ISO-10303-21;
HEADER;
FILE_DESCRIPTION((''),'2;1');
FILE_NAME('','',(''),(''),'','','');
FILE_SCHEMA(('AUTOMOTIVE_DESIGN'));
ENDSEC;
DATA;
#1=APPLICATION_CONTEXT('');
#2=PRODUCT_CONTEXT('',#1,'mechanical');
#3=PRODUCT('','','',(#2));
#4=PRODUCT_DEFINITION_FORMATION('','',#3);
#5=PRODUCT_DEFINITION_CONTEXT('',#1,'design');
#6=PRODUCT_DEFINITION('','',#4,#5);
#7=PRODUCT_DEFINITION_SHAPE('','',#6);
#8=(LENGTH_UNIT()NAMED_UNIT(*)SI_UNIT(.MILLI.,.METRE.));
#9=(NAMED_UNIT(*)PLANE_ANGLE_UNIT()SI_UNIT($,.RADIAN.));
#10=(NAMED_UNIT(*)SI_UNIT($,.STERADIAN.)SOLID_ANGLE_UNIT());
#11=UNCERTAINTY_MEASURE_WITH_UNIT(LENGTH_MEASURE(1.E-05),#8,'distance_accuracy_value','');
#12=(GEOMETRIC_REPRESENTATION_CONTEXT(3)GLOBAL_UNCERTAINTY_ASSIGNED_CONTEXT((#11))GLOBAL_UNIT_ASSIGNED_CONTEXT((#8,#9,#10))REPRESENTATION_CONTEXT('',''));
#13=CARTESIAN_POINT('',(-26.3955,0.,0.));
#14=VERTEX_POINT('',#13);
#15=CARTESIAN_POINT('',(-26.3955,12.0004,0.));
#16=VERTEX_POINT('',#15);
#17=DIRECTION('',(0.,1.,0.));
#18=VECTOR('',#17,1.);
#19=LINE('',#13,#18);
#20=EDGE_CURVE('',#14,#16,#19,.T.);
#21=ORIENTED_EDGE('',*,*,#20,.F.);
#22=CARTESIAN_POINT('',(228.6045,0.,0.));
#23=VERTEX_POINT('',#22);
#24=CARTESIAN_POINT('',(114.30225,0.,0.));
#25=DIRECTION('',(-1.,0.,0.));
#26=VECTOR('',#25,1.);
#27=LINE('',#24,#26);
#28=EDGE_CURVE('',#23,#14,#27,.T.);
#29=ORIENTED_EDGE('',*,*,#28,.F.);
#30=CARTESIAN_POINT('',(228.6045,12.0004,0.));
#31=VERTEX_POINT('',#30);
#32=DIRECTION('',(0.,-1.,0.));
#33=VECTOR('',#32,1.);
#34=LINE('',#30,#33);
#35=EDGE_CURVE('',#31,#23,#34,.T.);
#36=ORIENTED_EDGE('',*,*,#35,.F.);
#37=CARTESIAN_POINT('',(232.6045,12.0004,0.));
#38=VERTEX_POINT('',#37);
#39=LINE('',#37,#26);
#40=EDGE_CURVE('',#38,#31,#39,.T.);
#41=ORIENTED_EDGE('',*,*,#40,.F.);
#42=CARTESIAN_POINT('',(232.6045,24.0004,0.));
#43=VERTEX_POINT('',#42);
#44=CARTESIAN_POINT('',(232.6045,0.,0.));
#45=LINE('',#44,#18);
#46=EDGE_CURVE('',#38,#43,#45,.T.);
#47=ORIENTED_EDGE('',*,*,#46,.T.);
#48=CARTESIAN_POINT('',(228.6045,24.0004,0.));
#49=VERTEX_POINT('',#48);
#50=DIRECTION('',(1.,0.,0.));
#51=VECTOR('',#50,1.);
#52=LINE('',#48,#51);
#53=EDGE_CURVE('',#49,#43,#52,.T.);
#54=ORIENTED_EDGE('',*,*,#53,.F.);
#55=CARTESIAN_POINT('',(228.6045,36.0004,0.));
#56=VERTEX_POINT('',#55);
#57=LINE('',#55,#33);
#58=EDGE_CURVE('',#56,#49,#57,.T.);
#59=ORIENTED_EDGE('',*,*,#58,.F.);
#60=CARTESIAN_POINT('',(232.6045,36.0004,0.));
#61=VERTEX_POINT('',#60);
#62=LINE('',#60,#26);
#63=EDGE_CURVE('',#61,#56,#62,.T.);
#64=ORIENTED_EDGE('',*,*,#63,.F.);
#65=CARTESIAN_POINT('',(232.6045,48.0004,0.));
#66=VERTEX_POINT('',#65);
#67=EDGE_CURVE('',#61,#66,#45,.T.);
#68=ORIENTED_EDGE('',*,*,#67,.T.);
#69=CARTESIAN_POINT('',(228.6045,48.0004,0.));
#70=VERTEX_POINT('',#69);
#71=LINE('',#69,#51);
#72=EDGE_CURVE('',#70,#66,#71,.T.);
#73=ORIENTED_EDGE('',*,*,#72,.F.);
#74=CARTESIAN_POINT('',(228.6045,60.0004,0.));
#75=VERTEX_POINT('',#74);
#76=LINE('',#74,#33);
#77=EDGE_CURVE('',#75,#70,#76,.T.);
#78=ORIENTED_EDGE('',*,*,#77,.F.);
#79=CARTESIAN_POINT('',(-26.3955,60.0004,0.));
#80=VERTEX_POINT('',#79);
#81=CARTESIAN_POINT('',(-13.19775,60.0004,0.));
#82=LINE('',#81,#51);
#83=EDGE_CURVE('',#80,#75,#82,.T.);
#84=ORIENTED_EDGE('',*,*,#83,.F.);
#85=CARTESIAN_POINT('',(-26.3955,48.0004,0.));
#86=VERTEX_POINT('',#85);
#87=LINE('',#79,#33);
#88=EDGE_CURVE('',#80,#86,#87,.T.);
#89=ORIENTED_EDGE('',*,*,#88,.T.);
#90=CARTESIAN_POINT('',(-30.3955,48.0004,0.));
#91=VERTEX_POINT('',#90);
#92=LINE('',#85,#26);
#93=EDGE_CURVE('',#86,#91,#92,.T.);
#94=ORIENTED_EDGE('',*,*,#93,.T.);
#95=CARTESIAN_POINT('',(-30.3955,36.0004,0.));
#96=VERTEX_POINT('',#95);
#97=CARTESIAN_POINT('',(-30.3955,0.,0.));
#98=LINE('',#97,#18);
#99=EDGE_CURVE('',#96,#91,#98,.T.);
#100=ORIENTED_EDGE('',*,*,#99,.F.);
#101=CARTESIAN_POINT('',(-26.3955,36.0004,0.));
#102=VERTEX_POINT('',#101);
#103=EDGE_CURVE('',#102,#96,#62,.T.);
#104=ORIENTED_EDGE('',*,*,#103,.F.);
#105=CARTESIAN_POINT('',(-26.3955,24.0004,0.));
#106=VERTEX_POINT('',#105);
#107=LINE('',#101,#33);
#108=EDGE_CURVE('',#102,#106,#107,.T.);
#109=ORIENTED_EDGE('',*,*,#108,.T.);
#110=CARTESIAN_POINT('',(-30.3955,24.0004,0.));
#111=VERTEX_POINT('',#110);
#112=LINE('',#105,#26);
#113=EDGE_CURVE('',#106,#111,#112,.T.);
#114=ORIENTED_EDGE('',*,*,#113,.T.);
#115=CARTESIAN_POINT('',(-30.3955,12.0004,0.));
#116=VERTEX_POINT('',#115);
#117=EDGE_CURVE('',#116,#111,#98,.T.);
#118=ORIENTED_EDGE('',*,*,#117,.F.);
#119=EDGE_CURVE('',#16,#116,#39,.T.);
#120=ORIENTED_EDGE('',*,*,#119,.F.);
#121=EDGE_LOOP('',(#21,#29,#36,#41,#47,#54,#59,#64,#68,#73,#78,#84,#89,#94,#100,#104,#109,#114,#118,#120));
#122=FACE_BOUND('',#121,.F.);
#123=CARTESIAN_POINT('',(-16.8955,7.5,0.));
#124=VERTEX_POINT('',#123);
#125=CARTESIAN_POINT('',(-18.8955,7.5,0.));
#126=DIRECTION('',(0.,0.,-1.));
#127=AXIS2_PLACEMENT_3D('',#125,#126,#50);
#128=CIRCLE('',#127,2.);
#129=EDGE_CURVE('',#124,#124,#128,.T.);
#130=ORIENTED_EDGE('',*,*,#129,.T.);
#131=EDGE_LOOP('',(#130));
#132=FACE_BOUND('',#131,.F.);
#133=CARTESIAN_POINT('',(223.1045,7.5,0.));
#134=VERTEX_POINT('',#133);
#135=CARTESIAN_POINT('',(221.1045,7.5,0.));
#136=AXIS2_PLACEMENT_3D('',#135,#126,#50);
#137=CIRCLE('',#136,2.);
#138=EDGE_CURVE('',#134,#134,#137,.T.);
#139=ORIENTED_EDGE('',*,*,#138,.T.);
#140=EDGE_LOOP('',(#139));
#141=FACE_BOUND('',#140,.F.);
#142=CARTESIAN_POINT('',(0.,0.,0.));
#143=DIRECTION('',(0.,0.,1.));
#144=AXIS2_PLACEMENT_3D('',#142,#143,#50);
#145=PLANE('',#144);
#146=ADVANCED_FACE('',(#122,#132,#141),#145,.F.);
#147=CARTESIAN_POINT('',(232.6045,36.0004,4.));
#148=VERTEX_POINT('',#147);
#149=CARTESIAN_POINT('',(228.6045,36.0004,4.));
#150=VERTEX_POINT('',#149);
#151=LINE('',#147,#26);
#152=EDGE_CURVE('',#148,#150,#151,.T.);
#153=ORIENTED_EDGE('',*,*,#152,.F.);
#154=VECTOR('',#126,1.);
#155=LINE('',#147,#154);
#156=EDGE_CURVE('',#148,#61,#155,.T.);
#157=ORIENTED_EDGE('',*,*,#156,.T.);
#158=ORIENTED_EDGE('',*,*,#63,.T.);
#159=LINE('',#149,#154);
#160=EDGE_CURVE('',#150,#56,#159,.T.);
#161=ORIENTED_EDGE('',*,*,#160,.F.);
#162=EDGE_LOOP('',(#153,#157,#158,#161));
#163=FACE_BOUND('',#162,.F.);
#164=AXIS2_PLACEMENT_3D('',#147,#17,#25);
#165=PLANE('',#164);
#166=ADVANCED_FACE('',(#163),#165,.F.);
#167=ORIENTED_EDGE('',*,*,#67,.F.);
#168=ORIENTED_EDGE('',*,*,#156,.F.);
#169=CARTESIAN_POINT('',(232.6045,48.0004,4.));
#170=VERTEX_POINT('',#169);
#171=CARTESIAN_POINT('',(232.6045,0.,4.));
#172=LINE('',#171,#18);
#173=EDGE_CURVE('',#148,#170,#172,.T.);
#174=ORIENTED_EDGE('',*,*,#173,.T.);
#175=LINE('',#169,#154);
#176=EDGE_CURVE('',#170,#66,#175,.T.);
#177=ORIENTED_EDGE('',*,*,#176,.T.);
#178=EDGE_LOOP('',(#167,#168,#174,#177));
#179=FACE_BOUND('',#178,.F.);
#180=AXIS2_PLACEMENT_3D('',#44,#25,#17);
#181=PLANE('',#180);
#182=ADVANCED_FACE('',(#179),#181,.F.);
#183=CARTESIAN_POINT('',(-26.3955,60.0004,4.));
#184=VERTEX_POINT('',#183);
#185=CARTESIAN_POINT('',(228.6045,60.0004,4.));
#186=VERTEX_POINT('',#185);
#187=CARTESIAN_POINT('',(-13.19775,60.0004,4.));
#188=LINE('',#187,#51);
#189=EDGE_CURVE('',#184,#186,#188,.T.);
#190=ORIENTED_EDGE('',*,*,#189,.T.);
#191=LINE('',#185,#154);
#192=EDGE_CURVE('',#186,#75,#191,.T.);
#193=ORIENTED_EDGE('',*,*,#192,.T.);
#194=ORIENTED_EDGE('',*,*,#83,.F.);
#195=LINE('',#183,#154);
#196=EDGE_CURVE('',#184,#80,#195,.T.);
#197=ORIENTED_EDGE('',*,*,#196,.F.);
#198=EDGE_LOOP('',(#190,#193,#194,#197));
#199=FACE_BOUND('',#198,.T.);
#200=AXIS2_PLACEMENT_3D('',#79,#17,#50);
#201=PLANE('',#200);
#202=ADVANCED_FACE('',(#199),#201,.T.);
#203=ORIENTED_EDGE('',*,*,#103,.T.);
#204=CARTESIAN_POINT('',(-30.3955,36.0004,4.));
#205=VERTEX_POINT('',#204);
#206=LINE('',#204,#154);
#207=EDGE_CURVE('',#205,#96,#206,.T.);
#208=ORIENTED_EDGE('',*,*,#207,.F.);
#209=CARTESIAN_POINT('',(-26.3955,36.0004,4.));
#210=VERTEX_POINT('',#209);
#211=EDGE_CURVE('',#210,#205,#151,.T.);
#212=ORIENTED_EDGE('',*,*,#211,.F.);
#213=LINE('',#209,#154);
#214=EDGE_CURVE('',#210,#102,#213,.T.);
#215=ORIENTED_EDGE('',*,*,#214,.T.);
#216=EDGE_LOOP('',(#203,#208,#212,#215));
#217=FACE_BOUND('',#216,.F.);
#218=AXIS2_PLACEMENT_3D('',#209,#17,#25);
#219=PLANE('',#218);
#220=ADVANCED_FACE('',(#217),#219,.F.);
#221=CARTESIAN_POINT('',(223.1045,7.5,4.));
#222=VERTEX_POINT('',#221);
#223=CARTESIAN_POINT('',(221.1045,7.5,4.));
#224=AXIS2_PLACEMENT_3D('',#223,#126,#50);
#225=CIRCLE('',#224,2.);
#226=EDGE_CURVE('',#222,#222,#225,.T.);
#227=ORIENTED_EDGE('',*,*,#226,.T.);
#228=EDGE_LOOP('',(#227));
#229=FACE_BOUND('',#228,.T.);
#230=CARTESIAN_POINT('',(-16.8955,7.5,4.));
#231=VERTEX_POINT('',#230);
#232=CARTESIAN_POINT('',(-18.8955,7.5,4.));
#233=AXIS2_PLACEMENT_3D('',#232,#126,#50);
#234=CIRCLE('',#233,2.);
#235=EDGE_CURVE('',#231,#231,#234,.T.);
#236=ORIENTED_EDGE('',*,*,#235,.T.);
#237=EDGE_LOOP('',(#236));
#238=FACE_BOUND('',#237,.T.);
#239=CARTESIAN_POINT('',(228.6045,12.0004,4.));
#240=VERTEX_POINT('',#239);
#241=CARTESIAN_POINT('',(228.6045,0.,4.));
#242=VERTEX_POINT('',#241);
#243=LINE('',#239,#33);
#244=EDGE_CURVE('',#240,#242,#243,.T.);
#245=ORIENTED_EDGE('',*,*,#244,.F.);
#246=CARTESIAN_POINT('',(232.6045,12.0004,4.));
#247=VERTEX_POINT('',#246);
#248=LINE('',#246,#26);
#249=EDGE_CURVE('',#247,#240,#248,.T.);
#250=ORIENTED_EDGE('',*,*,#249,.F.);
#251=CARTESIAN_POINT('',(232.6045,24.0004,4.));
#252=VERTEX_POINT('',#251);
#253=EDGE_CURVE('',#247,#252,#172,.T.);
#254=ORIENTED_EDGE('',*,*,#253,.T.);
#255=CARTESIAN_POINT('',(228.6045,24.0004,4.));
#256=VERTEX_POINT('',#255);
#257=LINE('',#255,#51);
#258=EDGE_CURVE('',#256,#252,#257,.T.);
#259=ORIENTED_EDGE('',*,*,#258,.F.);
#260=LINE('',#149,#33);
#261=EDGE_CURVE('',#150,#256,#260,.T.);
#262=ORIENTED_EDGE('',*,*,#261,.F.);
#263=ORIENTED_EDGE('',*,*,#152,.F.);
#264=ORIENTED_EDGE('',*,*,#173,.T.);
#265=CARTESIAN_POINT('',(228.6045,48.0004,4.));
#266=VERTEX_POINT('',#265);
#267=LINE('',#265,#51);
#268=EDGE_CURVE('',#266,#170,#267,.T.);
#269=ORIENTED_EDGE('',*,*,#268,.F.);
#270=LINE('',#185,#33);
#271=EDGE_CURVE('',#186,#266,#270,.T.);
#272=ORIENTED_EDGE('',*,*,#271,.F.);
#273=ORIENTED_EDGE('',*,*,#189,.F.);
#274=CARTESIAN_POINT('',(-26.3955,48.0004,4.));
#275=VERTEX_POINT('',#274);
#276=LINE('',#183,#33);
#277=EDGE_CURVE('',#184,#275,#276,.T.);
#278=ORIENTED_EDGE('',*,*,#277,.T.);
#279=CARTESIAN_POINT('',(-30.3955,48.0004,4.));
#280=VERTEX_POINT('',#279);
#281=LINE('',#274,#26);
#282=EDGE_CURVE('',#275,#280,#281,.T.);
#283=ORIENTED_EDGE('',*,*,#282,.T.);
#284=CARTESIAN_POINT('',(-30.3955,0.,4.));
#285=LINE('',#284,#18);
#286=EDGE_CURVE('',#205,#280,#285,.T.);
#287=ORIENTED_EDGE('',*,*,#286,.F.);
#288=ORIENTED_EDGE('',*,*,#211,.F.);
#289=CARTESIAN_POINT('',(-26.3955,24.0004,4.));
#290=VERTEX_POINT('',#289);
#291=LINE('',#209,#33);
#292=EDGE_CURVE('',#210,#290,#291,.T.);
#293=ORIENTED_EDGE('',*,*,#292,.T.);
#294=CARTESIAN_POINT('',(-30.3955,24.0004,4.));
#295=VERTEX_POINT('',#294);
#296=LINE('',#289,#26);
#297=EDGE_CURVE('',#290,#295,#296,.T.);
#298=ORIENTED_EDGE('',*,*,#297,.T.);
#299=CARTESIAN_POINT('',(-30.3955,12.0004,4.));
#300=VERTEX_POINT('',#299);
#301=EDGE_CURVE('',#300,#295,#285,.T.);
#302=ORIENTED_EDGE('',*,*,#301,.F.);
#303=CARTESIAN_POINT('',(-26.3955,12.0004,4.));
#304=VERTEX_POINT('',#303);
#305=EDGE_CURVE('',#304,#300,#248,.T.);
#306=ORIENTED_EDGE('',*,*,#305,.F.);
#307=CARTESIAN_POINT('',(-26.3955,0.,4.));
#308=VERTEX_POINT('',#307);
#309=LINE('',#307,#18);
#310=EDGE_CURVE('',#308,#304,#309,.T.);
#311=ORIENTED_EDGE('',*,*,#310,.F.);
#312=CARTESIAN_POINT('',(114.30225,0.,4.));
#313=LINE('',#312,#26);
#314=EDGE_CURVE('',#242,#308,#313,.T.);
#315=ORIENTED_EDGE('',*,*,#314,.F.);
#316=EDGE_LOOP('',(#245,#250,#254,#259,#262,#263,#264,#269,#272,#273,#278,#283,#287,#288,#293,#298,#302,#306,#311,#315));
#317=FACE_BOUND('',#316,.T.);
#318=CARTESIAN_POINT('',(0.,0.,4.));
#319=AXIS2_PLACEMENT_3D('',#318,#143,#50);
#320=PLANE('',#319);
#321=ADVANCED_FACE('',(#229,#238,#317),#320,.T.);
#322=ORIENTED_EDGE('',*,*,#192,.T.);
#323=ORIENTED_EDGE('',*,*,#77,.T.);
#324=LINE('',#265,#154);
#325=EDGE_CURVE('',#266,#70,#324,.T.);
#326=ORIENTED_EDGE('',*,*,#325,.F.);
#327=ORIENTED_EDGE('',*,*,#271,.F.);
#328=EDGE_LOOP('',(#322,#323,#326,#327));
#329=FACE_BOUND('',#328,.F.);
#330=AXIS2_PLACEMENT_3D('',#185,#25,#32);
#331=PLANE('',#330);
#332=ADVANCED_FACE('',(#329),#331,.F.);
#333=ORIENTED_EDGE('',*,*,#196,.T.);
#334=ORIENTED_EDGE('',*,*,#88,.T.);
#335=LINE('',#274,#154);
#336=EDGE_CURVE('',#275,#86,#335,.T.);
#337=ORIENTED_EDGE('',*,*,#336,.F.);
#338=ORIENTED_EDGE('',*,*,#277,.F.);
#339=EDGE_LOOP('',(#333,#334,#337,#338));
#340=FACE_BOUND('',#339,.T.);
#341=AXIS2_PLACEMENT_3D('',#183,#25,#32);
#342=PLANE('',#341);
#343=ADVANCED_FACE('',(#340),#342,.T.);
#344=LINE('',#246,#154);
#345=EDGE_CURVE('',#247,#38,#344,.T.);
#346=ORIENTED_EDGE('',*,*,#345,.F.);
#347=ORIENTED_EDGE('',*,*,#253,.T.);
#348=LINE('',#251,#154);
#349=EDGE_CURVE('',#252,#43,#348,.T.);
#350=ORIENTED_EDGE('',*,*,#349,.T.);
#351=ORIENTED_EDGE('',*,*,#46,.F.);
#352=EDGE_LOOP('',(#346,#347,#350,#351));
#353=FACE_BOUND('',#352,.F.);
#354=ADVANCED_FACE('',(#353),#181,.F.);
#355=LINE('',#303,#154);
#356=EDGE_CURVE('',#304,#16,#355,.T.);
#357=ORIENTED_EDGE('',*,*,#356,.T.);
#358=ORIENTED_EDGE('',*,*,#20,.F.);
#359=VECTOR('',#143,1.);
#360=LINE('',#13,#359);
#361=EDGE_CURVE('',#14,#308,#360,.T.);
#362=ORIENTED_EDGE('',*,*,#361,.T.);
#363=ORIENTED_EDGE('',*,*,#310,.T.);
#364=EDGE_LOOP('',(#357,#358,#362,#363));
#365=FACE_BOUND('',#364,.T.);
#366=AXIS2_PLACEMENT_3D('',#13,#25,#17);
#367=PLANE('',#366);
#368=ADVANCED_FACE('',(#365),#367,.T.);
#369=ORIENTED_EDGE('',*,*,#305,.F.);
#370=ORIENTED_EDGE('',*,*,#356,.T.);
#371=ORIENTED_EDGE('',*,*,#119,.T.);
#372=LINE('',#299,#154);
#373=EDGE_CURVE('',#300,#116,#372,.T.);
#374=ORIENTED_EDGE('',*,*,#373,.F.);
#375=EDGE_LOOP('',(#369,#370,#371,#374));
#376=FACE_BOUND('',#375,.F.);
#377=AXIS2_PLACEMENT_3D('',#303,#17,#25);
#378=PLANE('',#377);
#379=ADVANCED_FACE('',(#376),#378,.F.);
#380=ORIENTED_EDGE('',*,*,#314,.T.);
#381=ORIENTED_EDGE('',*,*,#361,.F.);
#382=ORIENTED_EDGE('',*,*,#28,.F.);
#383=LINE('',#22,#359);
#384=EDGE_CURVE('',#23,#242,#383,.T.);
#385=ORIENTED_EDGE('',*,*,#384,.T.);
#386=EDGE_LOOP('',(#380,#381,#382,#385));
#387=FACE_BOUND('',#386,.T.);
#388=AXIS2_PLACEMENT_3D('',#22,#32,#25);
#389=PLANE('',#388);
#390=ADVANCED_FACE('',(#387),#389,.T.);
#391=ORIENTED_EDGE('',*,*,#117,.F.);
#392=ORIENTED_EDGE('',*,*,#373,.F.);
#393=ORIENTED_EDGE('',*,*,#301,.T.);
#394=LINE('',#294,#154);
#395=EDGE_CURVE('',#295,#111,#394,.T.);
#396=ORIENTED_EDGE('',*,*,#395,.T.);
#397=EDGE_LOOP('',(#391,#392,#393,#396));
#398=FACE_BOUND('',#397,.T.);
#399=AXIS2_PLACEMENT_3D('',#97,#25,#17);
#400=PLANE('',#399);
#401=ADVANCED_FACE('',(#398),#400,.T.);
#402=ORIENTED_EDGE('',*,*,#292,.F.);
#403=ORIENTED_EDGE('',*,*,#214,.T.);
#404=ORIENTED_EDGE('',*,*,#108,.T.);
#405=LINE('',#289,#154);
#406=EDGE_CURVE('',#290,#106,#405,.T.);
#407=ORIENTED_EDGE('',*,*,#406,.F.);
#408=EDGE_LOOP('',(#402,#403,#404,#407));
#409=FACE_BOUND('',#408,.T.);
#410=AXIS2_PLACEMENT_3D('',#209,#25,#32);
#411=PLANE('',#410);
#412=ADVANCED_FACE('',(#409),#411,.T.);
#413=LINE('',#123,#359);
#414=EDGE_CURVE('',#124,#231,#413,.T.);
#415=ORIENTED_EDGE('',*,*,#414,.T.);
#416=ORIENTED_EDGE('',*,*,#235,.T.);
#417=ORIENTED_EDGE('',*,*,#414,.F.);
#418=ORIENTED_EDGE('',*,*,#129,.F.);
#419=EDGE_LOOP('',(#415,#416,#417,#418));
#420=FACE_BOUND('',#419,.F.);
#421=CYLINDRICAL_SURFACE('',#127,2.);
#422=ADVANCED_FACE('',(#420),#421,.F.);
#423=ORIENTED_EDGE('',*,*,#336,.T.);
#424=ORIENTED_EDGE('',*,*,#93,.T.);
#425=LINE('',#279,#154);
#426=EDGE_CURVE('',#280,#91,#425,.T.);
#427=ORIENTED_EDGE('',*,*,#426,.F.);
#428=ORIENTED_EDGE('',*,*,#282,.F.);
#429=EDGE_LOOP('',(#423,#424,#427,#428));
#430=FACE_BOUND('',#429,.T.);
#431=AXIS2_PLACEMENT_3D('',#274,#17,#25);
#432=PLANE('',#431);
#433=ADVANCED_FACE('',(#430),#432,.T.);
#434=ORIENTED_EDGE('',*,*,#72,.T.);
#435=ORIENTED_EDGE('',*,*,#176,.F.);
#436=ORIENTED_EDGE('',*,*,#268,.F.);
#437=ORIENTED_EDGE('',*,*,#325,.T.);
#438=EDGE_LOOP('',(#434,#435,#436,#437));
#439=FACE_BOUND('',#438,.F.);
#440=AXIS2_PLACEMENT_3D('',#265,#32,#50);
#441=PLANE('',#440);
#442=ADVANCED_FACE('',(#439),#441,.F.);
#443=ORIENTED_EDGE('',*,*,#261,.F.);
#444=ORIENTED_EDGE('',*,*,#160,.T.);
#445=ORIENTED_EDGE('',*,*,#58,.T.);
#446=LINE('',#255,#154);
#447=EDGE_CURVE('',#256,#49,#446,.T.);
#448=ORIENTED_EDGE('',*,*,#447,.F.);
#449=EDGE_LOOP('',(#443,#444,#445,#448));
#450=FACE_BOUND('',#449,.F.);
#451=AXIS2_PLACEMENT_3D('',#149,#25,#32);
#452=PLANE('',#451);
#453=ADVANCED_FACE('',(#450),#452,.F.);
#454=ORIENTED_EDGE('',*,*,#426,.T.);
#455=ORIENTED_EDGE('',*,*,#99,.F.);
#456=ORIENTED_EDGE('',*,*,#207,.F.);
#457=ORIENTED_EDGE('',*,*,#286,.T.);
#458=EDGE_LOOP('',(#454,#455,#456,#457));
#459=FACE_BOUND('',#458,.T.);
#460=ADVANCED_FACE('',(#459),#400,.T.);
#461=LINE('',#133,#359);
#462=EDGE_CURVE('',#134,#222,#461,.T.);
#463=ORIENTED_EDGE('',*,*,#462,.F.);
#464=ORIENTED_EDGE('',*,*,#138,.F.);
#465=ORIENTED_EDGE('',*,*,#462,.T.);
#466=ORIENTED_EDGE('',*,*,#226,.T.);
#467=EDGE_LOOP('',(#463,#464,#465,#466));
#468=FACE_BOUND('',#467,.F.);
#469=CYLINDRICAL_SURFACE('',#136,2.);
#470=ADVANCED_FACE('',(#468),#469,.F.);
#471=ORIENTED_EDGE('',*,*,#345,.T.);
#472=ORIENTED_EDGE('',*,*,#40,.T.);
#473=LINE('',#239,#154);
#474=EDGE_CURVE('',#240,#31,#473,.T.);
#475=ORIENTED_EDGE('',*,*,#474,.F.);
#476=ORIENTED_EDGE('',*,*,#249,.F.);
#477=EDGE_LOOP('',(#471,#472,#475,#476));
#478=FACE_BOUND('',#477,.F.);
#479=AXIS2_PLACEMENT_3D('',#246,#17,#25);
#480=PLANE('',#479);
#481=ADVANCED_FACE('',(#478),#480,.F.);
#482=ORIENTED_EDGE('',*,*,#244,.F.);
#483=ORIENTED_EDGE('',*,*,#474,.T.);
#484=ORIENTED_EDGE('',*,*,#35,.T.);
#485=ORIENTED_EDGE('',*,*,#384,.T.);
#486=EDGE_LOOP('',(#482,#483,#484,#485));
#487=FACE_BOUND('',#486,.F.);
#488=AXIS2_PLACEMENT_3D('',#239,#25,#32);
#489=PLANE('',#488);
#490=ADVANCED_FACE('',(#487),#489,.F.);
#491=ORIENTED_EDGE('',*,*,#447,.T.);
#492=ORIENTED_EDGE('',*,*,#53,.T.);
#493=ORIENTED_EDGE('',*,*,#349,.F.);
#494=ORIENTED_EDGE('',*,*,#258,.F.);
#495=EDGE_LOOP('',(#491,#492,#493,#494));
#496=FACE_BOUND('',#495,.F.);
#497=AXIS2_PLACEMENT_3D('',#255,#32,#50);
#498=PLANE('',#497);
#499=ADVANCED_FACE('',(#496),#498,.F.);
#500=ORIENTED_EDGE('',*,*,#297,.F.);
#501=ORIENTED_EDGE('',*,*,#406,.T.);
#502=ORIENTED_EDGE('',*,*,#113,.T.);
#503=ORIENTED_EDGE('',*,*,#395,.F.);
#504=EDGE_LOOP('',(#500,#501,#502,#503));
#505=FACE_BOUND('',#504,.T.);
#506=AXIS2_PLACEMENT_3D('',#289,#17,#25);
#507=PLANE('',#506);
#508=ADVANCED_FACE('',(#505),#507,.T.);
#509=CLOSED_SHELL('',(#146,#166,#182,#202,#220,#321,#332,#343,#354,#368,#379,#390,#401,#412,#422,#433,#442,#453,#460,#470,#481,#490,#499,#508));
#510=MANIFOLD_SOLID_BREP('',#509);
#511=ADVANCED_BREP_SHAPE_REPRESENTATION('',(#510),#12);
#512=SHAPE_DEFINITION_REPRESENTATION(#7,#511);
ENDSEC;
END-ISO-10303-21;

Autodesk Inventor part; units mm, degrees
ref_plane "YZ Plane" through (0, 0, 0) normal (1, 0, 0) x (0, 1, 0)
ref_plane "XZ Plane" through (0, 0, 0) normal (0, 1, 0) x (-1, 0, 0)
ref_plane "XY Plane" through (0, 0, 0) normal (0, 0, 1) x (1, 0, 0)
sketch "Эскиз1" plane through (0, 0, 0) normal (0, 0, 1) x (1, 0, 0)
  line L0 (-26.3955, 0) -> (-26.3955, 30) projected
  line L1 (228.6045, 0) -> (228.6045, 60.0004)
  circle A0 centre (221.1045, 7.5) radius 2
  circle A1 centre (-18.8955, 7.5) radius 2 projected
  line L2 (-26.3955, 60.0004) -> (-30.3955, 60.0004) projected
  line L3 (-26.3955, 60.0004) -> (228.6045, 60.0004)
  line L4 (228.6045, 0) -> (-26.3955, 0)
  line L5 (-26.3955, 0) -> (-26.3955, 60.0004)
  point P0 (0, 0)
  dimension "d19" = 7.5
  dimension "d20" = 7.5
  dimension "d21" = 255
extrude "Выдавливание1" add sketch "Эскиз1" along normal blind 4
thicken "Толщина1" operation add thickness 4 both sides no extend neighbours yes toward (1, 0, 0) faces at (228.6045, 20.0001, 2.6667)
thicken "Толщина2" operation add thickness 4 both sides no extend neighbours yes toward (-1, 0, 0) faces at (-26.3955, 40.0003, 2.6667)
sketch "Эскиз2" plane through (0, 0, 4) normal (0, 0, 1) x (1, 0, 0)
  line L0 (232.6045, 60.0004) -> (-30.3955, 60.0004) projected
  line L1 (-30.3955, 60.0004) -> (-26.3955, 60.0004)
  line L2 (-26.3955, 60.0004) -> (-26.3955, 48.0004)
  line L3 (-26.3955, 48.0004) -> (-30.3955, 48.0004)
  line L4 (-30.3955, 48.0004) -> (-30.3955, 60.0004)
  line L5 (232.6045, 60.0004) -> (228.6045, 60.0004)
  line L6 (228.6045, 60.0004) -> (228.6045, 48.0004)
  line L7 (228.6045, 48.0004) -> (232.6045, 48.0004)
  line L8 (232.6045, 48.0004) -> (232.6045, 60.0004)
  point P0 (0, 0)
  point P1 (228.6045, 60.0004)
  dimension "d6" = 4
  dimension "d7" = 12
  dimension "d8" = 4
  dimension "d9" = 12
extrude "Выдавливание2" cut sketch "Эскиз2" against normal blind 4
pattern_linear "Прямоуг.массив1" count 3 spacing 24 along (0, -1, 0) of "Выдавливание2"
thicken "Толщина3" operation add thickness 4 both sides no extend neighbours yes toward (1, 0, 0) faces at (-30.3955, 0.0003, 1.3333) (-29.0622, 0.0004, 2.6667)
thicken "Толщина4" operation add thickness 4 both sides no extend neighbours yes toward (-1, 0, 0) faces at (232.6045, 0.0001, 1.3333) (229.9378, 0.0004, 2.6667)
properties part number "KB33-046-004-014 - Лицевая вертикальня пластина" material "Пластик ПЭТ"
